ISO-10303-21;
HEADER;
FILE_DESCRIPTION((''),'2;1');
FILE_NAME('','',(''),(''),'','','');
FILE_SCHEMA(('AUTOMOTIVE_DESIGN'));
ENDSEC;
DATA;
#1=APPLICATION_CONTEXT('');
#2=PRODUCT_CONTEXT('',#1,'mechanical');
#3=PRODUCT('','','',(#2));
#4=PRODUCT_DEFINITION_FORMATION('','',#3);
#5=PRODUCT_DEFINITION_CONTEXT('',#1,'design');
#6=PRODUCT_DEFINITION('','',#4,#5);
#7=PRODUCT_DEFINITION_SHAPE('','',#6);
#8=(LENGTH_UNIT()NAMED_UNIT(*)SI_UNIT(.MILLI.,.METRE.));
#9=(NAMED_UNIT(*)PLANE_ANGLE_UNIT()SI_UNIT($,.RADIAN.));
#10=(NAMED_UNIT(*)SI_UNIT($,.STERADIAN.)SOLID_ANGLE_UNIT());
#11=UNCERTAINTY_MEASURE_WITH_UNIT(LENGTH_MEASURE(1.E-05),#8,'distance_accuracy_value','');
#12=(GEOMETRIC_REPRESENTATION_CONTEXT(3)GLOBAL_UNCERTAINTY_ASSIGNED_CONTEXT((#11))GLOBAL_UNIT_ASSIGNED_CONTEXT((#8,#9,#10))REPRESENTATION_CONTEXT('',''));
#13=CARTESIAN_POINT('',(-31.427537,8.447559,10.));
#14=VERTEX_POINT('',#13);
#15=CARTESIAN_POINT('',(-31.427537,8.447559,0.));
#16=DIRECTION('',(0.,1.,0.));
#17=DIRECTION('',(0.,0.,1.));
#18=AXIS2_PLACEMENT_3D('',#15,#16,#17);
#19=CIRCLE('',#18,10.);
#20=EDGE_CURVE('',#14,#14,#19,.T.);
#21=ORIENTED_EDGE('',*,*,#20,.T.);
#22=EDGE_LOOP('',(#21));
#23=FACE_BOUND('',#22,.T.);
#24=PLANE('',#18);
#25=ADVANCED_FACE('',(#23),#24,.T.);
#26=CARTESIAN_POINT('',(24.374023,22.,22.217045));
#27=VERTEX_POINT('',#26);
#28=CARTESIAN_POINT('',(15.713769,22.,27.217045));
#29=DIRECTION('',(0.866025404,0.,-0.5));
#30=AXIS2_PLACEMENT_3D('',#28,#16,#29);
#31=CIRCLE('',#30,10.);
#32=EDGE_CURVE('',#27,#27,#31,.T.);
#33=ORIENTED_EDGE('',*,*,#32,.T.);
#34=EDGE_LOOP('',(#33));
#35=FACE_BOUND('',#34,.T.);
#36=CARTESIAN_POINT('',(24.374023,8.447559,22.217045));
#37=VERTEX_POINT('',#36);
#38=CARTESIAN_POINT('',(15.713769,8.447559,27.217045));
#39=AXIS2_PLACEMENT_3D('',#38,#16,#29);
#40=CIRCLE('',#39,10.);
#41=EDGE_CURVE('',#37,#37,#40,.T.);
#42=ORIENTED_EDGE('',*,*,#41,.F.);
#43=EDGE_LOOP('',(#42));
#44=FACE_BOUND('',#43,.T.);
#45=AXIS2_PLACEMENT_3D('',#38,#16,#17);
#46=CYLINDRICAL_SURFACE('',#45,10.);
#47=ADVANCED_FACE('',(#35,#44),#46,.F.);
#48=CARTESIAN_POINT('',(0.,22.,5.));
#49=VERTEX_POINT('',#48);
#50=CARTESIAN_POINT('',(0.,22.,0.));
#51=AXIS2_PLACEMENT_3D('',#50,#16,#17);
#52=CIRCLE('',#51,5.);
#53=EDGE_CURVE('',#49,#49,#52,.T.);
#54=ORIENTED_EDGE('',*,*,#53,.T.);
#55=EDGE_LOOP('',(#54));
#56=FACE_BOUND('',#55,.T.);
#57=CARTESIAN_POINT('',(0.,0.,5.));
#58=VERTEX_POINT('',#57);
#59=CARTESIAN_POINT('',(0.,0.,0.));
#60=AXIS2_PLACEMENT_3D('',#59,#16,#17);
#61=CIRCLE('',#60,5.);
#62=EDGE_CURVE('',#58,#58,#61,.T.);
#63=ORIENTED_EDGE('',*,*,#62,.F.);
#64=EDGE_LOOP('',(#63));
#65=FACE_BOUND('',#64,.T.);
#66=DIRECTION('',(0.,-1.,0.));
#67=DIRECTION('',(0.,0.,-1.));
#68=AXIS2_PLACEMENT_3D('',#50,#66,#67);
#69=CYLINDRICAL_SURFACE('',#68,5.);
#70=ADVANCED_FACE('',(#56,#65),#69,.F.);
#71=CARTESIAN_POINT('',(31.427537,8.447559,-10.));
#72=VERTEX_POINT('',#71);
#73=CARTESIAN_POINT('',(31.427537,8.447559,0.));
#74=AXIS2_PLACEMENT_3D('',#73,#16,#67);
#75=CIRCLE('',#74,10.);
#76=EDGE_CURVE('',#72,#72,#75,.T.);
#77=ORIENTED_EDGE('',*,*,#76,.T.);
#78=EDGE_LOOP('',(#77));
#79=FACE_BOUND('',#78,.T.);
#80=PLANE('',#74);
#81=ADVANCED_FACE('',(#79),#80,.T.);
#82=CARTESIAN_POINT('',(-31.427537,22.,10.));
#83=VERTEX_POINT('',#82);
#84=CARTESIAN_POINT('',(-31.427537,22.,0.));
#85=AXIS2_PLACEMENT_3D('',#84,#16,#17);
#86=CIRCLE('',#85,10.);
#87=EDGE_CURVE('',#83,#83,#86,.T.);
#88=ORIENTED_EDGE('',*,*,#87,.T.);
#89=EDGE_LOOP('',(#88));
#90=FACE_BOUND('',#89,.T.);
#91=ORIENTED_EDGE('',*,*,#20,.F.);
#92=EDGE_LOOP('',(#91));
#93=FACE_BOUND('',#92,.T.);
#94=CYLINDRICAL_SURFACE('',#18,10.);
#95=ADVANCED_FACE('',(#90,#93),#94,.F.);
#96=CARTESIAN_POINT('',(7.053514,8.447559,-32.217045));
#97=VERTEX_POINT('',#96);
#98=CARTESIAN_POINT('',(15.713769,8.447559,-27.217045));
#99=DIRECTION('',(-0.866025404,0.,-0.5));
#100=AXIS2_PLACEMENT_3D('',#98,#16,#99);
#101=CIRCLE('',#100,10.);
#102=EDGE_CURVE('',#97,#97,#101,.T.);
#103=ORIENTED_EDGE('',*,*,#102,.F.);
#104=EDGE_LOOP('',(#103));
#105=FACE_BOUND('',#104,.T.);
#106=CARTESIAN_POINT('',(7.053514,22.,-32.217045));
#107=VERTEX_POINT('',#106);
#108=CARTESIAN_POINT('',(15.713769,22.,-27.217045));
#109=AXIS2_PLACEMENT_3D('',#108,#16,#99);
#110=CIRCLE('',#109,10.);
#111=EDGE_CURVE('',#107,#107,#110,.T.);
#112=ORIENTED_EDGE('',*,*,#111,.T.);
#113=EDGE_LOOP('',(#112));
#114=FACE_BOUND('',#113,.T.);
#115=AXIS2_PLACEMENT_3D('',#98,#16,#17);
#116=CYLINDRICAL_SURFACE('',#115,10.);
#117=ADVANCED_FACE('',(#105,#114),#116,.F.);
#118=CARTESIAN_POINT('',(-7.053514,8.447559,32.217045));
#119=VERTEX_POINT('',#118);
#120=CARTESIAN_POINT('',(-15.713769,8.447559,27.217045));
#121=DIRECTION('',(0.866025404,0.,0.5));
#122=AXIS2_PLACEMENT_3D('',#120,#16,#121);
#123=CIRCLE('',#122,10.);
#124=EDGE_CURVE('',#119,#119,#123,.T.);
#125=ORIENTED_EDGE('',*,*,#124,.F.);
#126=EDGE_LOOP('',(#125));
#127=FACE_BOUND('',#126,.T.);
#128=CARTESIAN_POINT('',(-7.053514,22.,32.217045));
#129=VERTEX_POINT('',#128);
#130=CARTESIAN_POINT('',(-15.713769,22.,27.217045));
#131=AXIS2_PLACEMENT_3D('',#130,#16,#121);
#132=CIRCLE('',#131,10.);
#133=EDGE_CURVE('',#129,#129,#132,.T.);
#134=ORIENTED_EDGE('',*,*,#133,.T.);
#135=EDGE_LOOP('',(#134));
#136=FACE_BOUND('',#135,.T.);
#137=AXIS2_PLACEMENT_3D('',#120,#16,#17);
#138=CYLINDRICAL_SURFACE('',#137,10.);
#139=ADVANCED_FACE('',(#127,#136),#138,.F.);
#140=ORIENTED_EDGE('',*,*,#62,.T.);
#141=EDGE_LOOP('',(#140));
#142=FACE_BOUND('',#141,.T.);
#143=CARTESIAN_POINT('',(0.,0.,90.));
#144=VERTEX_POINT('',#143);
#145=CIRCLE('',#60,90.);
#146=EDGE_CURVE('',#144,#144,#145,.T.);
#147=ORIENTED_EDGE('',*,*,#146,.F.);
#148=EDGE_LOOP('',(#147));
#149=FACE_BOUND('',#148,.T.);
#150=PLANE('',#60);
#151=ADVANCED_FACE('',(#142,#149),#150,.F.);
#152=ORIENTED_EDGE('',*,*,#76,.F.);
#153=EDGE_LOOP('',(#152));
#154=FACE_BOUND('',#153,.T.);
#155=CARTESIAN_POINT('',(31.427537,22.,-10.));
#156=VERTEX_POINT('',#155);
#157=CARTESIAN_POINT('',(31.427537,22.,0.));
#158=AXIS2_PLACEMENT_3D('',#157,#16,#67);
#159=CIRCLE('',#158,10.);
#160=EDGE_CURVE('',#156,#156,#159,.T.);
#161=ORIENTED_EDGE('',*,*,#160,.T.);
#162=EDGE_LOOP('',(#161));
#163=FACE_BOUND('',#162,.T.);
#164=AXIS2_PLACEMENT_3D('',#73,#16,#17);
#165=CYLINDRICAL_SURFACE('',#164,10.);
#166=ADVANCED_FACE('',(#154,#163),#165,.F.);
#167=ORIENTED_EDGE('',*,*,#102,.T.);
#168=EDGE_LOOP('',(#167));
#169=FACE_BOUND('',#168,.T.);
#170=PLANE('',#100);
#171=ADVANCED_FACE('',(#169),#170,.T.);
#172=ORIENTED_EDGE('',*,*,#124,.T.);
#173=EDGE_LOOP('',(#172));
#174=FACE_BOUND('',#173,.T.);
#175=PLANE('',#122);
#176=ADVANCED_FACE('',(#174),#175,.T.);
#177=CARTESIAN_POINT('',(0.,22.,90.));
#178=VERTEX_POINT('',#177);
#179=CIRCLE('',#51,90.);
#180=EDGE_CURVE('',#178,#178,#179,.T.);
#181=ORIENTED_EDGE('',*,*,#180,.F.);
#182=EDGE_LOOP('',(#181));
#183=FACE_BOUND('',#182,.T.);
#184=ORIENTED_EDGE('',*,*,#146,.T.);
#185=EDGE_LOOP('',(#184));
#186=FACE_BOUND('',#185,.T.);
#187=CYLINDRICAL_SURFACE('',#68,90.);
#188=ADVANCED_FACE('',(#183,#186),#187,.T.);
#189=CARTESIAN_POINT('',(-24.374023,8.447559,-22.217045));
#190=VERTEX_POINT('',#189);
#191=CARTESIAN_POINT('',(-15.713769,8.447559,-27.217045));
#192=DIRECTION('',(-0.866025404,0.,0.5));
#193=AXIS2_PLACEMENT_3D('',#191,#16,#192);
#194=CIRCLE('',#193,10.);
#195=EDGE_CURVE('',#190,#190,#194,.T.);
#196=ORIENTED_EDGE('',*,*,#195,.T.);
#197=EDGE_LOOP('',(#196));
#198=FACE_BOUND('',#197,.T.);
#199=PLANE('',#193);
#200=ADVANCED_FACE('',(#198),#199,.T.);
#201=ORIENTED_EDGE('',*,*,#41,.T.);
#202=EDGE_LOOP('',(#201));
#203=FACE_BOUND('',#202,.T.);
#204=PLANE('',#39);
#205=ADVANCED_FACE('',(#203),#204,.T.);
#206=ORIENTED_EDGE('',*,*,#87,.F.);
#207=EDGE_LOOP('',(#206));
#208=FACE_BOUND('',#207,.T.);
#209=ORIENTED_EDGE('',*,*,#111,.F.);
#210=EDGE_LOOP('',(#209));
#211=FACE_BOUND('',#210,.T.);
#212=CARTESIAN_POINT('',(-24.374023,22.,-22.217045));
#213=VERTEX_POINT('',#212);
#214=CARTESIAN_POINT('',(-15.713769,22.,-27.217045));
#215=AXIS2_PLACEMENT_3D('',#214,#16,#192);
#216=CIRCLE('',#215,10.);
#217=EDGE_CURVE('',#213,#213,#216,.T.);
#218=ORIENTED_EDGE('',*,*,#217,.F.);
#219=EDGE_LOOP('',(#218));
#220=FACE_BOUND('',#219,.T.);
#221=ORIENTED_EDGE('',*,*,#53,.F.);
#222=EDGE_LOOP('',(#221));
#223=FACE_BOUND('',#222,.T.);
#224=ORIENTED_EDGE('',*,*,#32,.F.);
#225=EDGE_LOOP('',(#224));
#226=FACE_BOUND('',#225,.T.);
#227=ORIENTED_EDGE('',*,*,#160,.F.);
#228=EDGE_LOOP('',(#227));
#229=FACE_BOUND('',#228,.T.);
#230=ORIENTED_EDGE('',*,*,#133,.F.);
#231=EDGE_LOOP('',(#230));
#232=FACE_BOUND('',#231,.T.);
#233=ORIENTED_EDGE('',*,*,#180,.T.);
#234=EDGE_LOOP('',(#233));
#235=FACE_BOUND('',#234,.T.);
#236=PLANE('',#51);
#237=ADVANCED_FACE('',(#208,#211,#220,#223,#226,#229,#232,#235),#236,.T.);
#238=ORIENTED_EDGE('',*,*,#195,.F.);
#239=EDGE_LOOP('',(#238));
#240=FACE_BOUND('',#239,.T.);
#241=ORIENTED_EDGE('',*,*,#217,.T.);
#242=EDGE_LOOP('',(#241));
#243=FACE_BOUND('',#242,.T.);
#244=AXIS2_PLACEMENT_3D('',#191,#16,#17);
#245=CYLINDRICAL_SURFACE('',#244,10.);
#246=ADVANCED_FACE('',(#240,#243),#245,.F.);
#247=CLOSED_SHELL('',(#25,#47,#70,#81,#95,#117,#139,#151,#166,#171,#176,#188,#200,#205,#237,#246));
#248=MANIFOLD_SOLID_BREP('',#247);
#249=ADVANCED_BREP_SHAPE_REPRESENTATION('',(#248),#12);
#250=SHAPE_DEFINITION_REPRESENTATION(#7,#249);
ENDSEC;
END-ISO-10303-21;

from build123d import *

# Parameters (mm, degrees)
SKETCH1_R           = 90
BOSS_EXTRUDE1_DEPTH = 22
SKETCH2_R           = 5
CUT_EXTRUDE1_DEPTH  = 130.16655914
SKETCH3_R           = 10
CUT_EXTRUDE2_DEPTH  = 13.552440868
CIRPATTERN1_COUNT   = 6


with BuildPart() as part:
    # Sketch1 → Boss-Extrude1 (new body)
    with BuildSketch(Plane(origin=(0, 0, 0), x_dir=(1, 0, 0), z_dir=(0, 1, 0))):
        Circle(SKETCH1_R)
    extrude(amount=BOSS_EXTRUDE1_DEPTH)

    # Sketch2 → Cut-Extrude1 (cut, through all)
    with BuildSketch(Plane(origin=(0, 0, 0), x_dir=(1, 0, 0), z_dir=(0, 1, 0))):
        Circle(SKETCH2_R)
    extrude(amount=CUT_EXTRUDE1_DEPTH, mode=Mode.SUBTRACT)

    # Sketch3 → Cut-Extrude2 (cut)
    with BuildSketch(Plane(origin=(0, 22, 0), x_dir=(1, 0, 0), z_dir=(0, 1, 0))):
        with Locations((-31.427537015, 0)):
            Circle(SKETCH3_R)
    cut_extrude2 = extrude(amount=-CUT_EXTRUDE2_DEPTH, mode=Mode.SUBTRACT)

    # CirPattern1: Cut-Extrude2 ×6 about axis
    cirpattern1_axis = Axis((0, 0, 0), (0, 1, 0))
    for i in range(1, CIRPATTERN1_COUNT):
        add(cut_extrude2.rotate(cirpattern1_axis, i * 360 / CIRPATTERN1_COUNT), mode=Mode.SUBTRACT)


solid = part.part
